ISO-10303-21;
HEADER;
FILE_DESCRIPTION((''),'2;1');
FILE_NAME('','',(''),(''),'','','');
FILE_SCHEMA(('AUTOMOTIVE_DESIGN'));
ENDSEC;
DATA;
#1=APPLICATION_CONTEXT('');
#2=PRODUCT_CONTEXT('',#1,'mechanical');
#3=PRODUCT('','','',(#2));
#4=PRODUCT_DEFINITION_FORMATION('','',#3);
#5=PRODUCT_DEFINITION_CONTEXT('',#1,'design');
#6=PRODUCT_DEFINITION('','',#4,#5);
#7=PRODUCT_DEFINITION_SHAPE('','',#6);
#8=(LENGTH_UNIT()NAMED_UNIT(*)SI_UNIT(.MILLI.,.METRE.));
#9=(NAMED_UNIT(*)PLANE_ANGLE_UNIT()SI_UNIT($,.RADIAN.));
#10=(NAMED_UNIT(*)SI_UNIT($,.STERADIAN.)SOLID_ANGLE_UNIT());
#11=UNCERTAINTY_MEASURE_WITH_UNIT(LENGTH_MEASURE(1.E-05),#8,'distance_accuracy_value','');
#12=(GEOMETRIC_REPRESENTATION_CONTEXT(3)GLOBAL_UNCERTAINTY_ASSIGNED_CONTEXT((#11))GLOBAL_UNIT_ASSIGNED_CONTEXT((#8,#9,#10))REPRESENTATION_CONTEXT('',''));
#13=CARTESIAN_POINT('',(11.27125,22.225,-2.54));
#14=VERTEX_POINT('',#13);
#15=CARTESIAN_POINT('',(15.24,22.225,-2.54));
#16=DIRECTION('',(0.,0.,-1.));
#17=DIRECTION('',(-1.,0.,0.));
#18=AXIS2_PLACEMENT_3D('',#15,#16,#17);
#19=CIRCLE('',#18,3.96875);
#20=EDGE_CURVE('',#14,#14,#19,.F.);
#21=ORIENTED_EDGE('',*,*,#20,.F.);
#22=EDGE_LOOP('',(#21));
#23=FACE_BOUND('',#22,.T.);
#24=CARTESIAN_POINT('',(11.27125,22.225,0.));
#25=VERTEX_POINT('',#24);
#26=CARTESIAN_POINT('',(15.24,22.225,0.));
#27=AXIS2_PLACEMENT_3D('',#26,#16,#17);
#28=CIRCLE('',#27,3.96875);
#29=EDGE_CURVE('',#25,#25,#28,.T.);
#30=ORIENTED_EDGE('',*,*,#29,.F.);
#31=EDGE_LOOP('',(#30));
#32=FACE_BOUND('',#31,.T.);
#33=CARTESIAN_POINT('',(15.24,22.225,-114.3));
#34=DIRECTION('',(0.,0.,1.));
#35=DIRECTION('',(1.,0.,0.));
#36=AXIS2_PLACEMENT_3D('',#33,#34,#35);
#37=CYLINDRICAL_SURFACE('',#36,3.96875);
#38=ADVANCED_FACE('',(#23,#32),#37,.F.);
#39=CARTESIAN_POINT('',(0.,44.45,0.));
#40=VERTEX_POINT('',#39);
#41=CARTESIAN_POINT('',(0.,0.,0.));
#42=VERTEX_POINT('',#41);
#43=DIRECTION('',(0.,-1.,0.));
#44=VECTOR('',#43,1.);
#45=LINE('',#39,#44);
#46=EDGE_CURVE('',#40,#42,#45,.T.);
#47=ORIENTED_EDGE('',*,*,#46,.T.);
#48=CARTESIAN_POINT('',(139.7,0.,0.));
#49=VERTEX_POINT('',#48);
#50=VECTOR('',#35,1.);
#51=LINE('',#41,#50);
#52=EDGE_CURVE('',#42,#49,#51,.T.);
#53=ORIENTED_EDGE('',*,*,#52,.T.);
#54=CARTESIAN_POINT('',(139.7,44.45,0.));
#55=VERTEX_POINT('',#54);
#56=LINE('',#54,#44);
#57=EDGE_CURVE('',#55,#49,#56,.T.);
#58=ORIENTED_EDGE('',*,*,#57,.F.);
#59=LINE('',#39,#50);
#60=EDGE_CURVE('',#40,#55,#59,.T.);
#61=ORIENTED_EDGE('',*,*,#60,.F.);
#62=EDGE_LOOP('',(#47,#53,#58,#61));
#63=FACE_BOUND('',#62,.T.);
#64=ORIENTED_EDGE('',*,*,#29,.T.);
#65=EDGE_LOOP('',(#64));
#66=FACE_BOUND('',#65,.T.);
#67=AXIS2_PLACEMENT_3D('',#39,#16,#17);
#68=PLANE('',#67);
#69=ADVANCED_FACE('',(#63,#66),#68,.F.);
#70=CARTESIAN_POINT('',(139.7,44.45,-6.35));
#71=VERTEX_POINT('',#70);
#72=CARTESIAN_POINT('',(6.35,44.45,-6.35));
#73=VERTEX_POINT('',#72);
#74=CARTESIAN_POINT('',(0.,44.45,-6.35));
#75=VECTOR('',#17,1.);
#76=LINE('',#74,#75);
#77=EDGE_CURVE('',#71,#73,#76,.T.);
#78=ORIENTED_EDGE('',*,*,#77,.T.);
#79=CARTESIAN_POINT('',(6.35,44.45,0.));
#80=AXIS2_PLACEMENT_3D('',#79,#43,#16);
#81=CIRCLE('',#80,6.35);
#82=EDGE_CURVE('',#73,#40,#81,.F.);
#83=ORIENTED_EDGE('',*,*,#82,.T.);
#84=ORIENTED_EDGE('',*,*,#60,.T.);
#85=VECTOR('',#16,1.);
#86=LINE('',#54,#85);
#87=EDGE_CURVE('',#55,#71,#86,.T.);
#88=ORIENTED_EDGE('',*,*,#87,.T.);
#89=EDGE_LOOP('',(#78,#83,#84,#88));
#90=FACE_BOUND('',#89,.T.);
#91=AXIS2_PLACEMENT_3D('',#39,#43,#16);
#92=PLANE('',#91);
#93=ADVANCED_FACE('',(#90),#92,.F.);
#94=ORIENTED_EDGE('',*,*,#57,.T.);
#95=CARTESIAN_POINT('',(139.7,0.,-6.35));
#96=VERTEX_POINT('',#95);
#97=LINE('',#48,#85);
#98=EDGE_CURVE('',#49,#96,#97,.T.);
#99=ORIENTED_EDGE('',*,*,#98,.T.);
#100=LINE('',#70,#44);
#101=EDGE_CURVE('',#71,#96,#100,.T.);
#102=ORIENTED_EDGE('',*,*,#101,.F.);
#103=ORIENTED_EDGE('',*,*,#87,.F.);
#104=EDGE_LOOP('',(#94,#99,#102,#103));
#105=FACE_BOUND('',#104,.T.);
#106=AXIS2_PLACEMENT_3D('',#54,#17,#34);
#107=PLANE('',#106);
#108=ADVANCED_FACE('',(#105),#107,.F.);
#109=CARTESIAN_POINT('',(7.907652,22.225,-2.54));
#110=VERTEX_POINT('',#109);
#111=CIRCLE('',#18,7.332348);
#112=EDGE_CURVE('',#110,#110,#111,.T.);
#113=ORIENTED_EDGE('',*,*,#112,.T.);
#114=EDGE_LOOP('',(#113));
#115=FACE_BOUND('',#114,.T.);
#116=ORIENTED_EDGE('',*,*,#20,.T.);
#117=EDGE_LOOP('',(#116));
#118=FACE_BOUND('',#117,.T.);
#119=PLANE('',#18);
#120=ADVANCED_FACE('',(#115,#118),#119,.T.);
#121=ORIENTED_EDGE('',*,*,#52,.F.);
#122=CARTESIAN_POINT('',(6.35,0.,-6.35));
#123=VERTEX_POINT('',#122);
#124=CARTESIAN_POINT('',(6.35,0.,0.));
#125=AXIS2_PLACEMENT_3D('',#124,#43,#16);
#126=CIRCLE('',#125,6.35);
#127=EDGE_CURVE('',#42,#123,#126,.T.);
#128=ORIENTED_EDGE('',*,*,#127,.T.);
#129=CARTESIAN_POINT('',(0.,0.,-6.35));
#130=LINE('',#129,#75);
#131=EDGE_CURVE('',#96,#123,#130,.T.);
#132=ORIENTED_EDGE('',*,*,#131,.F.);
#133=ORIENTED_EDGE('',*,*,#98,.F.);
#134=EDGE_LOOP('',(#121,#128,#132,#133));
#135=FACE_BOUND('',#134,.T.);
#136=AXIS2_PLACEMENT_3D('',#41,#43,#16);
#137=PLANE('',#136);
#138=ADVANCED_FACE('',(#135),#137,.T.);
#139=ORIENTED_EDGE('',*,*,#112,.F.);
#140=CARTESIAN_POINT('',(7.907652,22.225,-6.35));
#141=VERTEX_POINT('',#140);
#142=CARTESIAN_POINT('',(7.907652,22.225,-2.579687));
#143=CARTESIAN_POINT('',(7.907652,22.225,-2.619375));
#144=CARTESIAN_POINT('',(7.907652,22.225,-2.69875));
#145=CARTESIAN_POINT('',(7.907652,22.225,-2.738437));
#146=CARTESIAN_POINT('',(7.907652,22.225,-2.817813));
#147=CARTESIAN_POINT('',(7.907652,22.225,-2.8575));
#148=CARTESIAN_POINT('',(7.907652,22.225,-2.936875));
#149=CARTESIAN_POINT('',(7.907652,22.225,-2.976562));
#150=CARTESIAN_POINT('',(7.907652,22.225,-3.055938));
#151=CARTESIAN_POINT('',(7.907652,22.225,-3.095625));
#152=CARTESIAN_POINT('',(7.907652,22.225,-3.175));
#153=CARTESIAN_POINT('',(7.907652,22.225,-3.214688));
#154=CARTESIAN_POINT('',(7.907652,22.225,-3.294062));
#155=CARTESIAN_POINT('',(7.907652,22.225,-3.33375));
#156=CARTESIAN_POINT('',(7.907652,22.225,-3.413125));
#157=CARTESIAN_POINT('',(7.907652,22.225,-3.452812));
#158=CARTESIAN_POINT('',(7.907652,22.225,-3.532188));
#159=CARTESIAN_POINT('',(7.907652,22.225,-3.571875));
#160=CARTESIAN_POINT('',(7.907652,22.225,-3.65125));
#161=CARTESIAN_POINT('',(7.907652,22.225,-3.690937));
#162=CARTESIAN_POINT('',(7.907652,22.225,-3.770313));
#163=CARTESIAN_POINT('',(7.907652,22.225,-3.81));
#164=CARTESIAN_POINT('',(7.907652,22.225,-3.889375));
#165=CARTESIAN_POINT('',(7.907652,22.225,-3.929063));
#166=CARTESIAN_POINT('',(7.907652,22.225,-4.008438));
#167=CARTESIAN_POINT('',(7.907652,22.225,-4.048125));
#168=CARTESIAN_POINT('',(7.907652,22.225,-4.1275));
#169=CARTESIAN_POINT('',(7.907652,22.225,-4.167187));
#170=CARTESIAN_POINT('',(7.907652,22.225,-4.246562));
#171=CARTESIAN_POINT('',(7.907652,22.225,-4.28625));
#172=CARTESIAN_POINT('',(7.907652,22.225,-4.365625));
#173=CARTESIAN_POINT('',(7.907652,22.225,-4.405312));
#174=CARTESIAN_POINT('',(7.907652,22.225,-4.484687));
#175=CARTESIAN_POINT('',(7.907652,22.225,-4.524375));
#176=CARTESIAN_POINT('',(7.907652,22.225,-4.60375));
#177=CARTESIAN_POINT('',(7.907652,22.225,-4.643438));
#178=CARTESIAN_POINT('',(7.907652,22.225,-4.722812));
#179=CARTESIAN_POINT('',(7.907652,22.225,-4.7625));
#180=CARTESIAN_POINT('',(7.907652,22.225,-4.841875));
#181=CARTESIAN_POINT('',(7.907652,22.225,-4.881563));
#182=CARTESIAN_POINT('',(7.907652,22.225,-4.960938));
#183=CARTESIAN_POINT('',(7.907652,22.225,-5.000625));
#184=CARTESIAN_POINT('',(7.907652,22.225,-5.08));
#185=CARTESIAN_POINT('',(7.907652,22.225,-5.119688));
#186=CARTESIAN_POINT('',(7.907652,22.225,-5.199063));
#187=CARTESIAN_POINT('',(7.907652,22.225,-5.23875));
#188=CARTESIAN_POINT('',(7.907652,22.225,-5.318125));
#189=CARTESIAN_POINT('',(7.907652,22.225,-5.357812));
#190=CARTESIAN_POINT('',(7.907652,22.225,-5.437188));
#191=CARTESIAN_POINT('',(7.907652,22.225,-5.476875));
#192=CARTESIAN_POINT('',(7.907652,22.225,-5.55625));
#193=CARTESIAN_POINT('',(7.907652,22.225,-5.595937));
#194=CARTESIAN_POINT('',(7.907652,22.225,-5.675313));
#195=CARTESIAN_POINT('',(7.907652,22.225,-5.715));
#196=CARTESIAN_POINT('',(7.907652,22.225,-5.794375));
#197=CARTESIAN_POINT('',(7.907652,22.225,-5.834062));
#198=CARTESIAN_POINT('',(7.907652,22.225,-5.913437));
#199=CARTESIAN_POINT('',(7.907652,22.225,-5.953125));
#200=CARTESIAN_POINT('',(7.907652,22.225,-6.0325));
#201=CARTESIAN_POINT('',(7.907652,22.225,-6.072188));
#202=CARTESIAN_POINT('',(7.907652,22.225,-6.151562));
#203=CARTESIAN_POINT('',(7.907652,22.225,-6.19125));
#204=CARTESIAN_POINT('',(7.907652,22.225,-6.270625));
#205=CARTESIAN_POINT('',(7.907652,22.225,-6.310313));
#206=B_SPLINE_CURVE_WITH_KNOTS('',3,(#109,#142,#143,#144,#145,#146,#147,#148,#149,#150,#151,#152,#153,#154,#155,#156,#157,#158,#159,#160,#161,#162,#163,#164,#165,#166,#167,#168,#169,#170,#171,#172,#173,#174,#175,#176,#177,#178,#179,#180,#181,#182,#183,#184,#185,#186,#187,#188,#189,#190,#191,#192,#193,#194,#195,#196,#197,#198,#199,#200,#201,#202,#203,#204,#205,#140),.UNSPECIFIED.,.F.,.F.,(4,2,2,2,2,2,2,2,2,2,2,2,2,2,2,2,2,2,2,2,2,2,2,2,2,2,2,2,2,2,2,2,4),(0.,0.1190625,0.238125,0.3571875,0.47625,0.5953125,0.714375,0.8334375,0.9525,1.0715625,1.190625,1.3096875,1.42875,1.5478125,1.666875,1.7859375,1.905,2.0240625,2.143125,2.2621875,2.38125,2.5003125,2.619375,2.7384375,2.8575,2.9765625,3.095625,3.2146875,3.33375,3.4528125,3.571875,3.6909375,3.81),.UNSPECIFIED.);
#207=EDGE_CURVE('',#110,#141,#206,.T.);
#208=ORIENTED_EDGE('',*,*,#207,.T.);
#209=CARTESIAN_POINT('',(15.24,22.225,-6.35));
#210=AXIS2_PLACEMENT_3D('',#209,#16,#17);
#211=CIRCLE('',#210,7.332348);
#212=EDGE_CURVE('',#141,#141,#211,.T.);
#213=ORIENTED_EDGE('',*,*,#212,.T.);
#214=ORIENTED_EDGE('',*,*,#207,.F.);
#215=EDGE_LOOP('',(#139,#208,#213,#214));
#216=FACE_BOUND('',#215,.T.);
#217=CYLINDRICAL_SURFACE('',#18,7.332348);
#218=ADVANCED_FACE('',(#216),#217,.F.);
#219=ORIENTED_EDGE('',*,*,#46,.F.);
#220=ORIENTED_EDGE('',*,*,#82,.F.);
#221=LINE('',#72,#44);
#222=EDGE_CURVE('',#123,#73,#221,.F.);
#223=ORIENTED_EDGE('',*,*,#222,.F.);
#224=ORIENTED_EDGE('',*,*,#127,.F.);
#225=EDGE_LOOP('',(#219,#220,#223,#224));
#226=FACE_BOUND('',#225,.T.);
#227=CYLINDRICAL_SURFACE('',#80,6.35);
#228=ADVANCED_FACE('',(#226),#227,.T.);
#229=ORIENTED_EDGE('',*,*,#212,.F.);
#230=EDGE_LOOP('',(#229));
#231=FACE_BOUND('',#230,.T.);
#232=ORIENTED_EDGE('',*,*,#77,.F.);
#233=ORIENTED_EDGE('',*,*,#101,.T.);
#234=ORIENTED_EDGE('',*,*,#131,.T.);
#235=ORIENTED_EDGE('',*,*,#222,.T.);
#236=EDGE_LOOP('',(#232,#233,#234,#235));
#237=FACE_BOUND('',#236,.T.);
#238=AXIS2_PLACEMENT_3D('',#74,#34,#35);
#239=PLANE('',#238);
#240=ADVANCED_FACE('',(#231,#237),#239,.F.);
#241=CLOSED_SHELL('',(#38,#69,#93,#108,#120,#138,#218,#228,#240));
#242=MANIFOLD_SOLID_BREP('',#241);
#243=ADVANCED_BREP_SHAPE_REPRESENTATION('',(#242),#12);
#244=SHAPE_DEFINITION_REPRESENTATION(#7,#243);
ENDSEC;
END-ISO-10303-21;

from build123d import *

# Parameters (mm, degrees)
SKETCH1_W           = 139.7
SKETCH1_H           = 6.35
BOSS_EXTRUDE1_DEPTH = 44.45
FILLET1_R           = 6.35
SKETCH4_R           = 3.96875
CUT_EXTRUDE2_DEPTH  = 254
SKETCH6_R           = 7.332348418
CUT_EXTRUDE4_DEPTH  = 3.81


with BuildPart() as part:
    # Sketch1 → Boss-Extrude1 (new body)
    with BuildSketch(Plane(origin=(0, 0, 0), x_dir=(1, 0, 0), z_dir=(0, 1, 0))):
        with Locations((69.85, 3.175)):
            Rectangle(SKETCH1_W, SKETCH1_H)
    extrude(amount=BOSS_EXTRUDE1_DEPTH)

    # Fillet1
    fillet1_edges = [part.edges().sort_by_distance(p)[0] for p in [
        (0, 22.225, -6.35),
    ]]
    fillet(fillet1_edges, radius=FILLET1_R - 0.0001)  # a hair under: the kernel refuses the full size

    # Sketch4 → Cut-Extrude2 (cut)
    with BuildSketch(Plane(origin=(69.948790088, 1.415162488, 139.7), x_dir=(1, 0, 0), z_dir=(0, 0, 1))):
        with Locations((-54.708790088, 20.809837512)):
            Circle(SKETCH4_R)
    extrude(amount=-CUT_EXTRUDE2_DEPTH, mode=Mode.SUBTRACT)

    # Sketch6 → Cut-Extrude4 (cut)
    with BuildSketch(Plane(origin=(0, 0, -6.35), x_dir=(-1, 0, 0), z_dir=(0, 0, -1))):
        with Locations((-15.24, 22.225)):
            Circle(SKETCH6_R)
    extrude(amount=-CUT_EXTRUDE4_DEPTH, mode=Mode.SUBTRACT)


solid = part.part
